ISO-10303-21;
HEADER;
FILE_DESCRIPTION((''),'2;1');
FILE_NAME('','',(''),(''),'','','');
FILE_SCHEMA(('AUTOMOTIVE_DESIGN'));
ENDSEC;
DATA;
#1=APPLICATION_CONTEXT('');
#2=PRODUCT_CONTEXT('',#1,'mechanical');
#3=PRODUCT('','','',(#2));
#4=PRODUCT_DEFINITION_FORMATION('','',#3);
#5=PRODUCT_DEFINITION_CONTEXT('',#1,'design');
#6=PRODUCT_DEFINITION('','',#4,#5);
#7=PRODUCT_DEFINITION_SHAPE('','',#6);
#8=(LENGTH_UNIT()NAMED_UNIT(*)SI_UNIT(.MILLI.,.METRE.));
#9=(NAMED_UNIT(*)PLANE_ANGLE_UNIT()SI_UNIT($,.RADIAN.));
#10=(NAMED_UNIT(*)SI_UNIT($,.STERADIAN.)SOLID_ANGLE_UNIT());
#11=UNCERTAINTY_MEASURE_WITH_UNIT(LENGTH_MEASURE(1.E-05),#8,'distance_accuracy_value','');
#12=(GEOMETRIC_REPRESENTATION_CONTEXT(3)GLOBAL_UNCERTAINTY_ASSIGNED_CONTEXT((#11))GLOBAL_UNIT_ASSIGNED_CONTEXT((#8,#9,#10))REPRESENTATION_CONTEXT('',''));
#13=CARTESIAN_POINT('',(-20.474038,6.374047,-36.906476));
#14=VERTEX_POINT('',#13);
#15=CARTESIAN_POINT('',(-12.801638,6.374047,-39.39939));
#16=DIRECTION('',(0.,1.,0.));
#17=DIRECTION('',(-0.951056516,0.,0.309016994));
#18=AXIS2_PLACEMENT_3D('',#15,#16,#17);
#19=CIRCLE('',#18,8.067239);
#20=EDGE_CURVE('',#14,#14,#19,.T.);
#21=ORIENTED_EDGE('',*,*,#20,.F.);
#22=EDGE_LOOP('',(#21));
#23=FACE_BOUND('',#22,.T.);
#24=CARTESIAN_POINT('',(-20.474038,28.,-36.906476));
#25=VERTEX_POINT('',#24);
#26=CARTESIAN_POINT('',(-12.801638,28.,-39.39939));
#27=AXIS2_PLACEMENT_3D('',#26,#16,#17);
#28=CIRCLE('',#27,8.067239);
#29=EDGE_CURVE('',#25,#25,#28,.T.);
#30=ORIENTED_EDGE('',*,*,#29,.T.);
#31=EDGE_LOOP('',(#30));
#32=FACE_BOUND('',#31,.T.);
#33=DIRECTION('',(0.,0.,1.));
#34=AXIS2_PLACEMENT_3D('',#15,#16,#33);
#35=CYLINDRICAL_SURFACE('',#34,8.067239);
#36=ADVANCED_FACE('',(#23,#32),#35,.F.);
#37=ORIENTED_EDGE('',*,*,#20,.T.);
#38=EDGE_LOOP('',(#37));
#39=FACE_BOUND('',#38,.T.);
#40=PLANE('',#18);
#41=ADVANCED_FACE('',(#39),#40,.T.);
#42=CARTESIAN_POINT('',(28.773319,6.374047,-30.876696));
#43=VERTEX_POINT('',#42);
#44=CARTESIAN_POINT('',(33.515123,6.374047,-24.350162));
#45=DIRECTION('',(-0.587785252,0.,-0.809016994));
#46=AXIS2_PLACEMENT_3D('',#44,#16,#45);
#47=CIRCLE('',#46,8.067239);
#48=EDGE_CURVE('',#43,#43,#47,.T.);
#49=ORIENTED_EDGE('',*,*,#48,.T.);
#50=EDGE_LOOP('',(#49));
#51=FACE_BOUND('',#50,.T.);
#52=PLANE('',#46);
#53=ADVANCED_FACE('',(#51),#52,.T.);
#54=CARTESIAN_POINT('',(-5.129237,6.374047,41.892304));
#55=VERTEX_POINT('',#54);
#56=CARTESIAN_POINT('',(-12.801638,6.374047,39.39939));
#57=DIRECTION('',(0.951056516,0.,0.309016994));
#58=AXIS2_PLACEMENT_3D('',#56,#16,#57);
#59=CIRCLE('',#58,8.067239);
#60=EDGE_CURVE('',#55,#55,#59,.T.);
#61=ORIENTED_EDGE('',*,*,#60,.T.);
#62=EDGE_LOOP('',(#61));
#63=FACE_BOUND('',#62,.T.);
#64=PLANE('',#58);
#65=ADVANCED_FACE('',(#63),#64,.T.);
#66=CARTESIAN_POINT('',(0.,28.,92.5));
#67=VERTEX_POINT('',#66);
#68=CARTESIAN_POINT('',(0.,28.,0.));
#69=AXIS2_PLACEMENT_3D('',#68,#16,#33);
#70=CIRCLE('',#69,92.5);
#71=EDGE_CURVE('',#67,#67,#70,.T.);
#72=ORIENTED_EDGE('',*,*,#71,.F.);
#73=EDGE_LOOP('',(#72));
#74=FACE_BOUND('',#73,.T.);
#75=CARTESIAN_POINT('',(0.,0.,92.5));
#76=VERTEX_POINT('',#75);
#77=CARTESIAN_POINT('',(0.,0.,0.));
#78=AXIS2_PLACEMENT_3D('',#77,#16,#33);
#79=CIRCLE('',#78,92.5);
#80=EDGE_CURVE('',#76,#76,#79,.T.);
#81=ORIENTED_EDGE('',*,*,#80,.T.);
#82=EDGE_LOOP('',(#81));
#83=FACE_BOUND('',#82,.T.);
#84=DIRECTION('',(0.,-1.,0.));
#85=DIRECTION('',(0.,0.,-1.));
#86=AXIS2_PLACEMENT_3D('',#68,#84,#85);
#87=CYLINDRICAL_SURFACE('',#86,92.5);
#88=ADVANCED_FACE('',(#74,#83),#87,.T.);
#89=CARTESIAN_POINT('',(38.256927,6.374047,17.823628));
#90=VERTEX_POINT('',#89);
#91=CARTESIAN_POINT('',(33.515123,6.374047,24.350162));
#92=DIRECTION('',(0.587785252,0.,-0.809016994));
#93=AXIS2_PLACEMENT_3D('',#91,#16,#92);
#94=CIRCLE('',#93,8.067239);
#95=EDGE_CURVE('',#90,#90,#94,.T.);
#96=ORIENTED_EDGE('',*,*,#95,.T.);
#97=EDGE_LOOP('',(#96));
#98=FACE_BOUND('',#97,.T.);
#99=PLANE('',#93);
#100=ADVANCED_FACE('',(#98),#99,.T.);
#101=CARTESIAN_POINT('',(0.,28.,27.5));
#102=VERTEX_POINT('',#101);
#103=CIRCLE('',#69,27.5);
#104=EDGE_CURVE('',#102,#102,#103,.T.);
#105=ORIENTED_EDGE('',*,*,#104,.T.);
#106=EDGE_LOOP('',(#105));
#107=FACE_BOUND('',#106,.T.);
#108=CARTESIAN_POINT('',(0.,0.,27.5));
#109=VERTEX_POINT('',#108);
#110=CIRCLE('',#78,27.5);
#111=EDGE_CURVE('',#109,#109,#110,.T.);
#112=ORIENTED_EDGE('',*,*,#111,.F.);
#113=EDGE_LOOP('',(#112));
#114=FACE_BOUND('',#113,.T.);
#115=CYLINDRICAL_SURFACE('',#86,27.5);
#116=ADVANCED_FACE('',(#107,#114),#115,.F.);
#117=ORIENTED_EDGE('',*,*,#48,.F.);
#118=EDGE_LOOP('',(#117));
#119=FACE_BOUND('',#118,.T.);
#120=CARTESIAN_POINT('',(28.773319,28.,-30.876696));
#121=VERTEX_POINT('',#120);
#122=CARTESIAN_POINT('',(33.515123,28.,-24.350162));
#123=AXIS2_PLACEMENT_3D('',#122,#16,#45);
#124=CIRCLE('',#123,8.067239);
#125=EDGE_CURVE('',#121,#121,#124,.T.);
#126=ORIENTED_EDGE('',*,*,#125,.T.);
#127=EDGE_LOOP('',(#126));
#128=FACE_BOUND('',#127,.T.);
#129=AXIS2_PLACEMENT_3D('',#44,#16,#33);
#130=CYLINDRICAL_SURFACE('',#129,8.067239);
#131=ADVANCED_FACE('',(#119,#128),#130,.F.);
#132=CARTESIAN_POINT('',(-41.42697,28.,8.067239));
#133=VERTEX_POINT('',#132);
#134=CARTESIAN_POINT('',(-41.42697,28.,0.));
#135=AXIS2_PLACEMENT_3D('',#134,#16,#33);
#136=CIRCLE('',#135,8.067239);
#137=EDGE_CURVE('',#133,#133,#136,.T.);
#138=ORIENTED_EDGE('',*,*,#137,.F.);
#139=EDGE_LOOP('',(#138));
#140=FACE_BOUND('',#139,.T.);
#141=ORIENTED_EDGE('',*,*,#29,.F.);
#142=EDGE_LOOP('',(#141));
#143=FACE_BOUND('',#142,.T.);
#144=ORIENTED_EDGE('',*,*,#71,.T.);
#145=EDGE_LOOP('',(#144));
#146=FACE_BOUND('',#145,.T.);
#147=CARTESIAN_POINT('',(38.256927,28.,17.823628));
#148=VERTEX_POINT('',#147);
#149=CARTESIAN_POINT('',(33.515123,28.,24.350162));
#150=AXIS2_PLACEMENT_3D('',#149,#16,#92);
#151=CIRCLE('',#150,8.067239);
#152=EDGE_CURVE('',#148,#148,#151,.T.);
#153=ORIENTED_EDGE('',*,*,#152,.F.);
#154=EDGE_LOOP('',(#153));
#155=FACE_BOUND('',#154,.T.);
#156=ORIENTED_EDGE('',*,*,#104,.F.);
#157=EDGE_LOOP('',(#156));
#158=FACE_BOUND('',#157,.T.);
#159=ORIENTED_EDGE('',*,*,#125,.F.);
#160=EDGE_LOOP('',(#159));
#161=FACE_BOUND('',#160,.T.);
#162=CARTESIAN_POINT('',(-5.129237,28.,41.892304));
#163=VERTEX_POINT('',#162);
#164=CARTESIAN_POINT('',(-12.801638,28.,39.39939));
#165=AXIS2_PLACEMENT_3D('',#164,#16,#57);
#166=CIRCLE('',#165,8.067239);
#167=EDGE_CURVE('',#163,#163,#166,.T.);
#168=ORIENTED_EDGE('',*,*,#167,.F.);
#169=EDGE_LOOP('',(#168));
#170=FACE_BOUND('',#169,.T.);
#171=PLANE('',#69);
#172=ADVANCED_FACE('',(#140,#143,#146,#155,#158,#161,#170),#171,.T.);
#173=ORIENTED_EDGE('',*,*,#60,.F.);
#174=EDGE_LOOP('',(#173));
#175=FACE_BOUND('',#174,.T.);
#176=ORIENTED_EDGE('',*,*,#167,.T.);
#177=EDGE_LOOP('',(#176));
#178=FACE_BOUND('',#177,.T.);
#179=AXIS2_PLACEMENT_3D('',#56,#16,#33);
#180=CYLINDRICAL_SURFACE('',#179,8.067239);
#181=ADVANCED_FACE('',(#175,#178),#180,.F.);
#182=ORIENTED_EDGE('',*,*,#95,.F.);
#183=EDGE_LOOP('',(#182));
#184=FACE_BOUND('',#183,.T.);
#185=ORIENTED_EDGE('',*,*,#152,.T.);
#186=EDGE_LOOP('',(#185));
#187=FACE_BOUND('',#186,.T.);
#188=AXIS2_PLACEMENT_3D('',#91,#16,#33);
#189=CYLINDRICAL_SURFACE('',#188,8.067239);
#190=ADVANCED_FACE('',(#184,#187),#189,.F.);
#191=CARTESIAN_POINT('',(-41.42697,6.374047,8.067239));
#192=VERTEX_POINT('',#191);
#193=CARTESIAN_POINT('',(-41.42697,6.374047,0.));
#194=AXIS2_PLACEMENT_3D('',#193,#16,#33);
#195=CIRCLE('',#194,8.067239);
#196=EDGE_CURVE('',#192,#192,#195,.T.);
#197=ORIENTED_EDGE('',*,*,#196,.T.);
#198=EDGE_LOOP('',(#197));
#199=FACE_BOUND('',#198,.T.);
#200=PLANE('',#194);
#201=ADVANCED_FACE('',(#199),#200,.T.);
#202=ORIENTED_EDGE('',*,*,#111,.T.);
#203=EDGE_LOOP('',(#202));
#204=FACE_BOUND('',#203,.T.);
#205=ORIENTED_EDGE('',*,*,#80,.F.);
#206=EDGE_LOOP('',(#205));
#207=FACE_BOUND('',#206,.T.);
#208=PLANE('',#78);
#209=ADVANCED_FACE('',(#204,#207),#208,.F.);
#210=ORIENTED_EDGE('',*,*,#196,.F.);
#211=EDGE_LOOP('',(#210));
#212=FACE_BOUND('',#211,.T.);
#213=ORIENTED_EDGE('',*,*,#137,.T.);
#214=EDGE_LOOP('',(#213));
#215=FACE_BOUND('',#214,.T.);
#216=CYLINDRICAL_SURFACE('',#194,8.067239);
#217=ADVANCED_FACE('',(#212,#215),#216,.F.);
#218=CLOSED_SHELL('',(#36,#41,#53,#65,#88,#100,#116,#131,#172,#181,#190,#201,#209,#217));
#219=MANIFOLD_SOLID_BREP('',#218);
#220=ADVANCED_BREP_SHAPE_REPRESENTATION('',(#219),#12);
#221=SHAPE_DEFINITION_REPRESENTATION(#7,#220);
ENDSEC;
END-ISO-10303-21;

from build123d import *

# Parameters (mm, degrees)
SKETCH1_R           = 92.5
BOSS_EXTRUDE1_DEPTH = 28
SKETCH2_R           = 27.5
CUT_EXTRUDE1_DEPTH  = 134.777800849
SKETCH3_R           = 8.067239177
CUT_EXTRUDE2_DEPTH  = 21.625953126
CIRPATTERN1_COUNT   = 5


with BuildPart() as part:
    # Sketch1 → Boss-Extrude1 (new body)
    with BuildSketch(Plane(origin=(0, 0, 0), x_dir=(1, 0, 0), z_dir=(0, 1, 0))):
        Circle(SKETCH1_R)
    extrude(amount=BOSS_EXTRUDE1_DEPTH)

    # Sketch2 → Cut-Extrude1 (cut, through all)
    with BuildSketch(Plane(origin=(0, 0, 0), x_dir=(1, 0, 0), z_dir=(0, 1, 0))):
        Circle(SKETCH2_R)
    extrude(amount=CUT_EXTRUDE1_DEPTH, mode=Mode.SUBTRACT)

    # Sketch3 → Cut-Extrude2 (cut)
    with BuildSketch(Plane(origin=(0, 28, 0), x_dir=(1, 0, 0), z_dir=(0, 1, 0))):
        with Locations((-41.426970059, 0)):
            Circle(SKETCH3_R)
    cut_extrude2 = extrude(amount=-CUT_EXTRUDE2_DEPTH, mode=Mode.SUBTRACT)

    # CirPattern1: Cut-Extrude2 ×5 about axis
    cirpattern1_axis = Axis((0, 0, 0), (0, 1, 0))
    for i in range(1, CIRPATTERN1_COUNT):
        add(cut_extrude2.rotate(cirpattern1_axis, i * 360 / CIRPATTERN1_COUNT), mode=Mode.SUBTRACT)


solid = part.part
